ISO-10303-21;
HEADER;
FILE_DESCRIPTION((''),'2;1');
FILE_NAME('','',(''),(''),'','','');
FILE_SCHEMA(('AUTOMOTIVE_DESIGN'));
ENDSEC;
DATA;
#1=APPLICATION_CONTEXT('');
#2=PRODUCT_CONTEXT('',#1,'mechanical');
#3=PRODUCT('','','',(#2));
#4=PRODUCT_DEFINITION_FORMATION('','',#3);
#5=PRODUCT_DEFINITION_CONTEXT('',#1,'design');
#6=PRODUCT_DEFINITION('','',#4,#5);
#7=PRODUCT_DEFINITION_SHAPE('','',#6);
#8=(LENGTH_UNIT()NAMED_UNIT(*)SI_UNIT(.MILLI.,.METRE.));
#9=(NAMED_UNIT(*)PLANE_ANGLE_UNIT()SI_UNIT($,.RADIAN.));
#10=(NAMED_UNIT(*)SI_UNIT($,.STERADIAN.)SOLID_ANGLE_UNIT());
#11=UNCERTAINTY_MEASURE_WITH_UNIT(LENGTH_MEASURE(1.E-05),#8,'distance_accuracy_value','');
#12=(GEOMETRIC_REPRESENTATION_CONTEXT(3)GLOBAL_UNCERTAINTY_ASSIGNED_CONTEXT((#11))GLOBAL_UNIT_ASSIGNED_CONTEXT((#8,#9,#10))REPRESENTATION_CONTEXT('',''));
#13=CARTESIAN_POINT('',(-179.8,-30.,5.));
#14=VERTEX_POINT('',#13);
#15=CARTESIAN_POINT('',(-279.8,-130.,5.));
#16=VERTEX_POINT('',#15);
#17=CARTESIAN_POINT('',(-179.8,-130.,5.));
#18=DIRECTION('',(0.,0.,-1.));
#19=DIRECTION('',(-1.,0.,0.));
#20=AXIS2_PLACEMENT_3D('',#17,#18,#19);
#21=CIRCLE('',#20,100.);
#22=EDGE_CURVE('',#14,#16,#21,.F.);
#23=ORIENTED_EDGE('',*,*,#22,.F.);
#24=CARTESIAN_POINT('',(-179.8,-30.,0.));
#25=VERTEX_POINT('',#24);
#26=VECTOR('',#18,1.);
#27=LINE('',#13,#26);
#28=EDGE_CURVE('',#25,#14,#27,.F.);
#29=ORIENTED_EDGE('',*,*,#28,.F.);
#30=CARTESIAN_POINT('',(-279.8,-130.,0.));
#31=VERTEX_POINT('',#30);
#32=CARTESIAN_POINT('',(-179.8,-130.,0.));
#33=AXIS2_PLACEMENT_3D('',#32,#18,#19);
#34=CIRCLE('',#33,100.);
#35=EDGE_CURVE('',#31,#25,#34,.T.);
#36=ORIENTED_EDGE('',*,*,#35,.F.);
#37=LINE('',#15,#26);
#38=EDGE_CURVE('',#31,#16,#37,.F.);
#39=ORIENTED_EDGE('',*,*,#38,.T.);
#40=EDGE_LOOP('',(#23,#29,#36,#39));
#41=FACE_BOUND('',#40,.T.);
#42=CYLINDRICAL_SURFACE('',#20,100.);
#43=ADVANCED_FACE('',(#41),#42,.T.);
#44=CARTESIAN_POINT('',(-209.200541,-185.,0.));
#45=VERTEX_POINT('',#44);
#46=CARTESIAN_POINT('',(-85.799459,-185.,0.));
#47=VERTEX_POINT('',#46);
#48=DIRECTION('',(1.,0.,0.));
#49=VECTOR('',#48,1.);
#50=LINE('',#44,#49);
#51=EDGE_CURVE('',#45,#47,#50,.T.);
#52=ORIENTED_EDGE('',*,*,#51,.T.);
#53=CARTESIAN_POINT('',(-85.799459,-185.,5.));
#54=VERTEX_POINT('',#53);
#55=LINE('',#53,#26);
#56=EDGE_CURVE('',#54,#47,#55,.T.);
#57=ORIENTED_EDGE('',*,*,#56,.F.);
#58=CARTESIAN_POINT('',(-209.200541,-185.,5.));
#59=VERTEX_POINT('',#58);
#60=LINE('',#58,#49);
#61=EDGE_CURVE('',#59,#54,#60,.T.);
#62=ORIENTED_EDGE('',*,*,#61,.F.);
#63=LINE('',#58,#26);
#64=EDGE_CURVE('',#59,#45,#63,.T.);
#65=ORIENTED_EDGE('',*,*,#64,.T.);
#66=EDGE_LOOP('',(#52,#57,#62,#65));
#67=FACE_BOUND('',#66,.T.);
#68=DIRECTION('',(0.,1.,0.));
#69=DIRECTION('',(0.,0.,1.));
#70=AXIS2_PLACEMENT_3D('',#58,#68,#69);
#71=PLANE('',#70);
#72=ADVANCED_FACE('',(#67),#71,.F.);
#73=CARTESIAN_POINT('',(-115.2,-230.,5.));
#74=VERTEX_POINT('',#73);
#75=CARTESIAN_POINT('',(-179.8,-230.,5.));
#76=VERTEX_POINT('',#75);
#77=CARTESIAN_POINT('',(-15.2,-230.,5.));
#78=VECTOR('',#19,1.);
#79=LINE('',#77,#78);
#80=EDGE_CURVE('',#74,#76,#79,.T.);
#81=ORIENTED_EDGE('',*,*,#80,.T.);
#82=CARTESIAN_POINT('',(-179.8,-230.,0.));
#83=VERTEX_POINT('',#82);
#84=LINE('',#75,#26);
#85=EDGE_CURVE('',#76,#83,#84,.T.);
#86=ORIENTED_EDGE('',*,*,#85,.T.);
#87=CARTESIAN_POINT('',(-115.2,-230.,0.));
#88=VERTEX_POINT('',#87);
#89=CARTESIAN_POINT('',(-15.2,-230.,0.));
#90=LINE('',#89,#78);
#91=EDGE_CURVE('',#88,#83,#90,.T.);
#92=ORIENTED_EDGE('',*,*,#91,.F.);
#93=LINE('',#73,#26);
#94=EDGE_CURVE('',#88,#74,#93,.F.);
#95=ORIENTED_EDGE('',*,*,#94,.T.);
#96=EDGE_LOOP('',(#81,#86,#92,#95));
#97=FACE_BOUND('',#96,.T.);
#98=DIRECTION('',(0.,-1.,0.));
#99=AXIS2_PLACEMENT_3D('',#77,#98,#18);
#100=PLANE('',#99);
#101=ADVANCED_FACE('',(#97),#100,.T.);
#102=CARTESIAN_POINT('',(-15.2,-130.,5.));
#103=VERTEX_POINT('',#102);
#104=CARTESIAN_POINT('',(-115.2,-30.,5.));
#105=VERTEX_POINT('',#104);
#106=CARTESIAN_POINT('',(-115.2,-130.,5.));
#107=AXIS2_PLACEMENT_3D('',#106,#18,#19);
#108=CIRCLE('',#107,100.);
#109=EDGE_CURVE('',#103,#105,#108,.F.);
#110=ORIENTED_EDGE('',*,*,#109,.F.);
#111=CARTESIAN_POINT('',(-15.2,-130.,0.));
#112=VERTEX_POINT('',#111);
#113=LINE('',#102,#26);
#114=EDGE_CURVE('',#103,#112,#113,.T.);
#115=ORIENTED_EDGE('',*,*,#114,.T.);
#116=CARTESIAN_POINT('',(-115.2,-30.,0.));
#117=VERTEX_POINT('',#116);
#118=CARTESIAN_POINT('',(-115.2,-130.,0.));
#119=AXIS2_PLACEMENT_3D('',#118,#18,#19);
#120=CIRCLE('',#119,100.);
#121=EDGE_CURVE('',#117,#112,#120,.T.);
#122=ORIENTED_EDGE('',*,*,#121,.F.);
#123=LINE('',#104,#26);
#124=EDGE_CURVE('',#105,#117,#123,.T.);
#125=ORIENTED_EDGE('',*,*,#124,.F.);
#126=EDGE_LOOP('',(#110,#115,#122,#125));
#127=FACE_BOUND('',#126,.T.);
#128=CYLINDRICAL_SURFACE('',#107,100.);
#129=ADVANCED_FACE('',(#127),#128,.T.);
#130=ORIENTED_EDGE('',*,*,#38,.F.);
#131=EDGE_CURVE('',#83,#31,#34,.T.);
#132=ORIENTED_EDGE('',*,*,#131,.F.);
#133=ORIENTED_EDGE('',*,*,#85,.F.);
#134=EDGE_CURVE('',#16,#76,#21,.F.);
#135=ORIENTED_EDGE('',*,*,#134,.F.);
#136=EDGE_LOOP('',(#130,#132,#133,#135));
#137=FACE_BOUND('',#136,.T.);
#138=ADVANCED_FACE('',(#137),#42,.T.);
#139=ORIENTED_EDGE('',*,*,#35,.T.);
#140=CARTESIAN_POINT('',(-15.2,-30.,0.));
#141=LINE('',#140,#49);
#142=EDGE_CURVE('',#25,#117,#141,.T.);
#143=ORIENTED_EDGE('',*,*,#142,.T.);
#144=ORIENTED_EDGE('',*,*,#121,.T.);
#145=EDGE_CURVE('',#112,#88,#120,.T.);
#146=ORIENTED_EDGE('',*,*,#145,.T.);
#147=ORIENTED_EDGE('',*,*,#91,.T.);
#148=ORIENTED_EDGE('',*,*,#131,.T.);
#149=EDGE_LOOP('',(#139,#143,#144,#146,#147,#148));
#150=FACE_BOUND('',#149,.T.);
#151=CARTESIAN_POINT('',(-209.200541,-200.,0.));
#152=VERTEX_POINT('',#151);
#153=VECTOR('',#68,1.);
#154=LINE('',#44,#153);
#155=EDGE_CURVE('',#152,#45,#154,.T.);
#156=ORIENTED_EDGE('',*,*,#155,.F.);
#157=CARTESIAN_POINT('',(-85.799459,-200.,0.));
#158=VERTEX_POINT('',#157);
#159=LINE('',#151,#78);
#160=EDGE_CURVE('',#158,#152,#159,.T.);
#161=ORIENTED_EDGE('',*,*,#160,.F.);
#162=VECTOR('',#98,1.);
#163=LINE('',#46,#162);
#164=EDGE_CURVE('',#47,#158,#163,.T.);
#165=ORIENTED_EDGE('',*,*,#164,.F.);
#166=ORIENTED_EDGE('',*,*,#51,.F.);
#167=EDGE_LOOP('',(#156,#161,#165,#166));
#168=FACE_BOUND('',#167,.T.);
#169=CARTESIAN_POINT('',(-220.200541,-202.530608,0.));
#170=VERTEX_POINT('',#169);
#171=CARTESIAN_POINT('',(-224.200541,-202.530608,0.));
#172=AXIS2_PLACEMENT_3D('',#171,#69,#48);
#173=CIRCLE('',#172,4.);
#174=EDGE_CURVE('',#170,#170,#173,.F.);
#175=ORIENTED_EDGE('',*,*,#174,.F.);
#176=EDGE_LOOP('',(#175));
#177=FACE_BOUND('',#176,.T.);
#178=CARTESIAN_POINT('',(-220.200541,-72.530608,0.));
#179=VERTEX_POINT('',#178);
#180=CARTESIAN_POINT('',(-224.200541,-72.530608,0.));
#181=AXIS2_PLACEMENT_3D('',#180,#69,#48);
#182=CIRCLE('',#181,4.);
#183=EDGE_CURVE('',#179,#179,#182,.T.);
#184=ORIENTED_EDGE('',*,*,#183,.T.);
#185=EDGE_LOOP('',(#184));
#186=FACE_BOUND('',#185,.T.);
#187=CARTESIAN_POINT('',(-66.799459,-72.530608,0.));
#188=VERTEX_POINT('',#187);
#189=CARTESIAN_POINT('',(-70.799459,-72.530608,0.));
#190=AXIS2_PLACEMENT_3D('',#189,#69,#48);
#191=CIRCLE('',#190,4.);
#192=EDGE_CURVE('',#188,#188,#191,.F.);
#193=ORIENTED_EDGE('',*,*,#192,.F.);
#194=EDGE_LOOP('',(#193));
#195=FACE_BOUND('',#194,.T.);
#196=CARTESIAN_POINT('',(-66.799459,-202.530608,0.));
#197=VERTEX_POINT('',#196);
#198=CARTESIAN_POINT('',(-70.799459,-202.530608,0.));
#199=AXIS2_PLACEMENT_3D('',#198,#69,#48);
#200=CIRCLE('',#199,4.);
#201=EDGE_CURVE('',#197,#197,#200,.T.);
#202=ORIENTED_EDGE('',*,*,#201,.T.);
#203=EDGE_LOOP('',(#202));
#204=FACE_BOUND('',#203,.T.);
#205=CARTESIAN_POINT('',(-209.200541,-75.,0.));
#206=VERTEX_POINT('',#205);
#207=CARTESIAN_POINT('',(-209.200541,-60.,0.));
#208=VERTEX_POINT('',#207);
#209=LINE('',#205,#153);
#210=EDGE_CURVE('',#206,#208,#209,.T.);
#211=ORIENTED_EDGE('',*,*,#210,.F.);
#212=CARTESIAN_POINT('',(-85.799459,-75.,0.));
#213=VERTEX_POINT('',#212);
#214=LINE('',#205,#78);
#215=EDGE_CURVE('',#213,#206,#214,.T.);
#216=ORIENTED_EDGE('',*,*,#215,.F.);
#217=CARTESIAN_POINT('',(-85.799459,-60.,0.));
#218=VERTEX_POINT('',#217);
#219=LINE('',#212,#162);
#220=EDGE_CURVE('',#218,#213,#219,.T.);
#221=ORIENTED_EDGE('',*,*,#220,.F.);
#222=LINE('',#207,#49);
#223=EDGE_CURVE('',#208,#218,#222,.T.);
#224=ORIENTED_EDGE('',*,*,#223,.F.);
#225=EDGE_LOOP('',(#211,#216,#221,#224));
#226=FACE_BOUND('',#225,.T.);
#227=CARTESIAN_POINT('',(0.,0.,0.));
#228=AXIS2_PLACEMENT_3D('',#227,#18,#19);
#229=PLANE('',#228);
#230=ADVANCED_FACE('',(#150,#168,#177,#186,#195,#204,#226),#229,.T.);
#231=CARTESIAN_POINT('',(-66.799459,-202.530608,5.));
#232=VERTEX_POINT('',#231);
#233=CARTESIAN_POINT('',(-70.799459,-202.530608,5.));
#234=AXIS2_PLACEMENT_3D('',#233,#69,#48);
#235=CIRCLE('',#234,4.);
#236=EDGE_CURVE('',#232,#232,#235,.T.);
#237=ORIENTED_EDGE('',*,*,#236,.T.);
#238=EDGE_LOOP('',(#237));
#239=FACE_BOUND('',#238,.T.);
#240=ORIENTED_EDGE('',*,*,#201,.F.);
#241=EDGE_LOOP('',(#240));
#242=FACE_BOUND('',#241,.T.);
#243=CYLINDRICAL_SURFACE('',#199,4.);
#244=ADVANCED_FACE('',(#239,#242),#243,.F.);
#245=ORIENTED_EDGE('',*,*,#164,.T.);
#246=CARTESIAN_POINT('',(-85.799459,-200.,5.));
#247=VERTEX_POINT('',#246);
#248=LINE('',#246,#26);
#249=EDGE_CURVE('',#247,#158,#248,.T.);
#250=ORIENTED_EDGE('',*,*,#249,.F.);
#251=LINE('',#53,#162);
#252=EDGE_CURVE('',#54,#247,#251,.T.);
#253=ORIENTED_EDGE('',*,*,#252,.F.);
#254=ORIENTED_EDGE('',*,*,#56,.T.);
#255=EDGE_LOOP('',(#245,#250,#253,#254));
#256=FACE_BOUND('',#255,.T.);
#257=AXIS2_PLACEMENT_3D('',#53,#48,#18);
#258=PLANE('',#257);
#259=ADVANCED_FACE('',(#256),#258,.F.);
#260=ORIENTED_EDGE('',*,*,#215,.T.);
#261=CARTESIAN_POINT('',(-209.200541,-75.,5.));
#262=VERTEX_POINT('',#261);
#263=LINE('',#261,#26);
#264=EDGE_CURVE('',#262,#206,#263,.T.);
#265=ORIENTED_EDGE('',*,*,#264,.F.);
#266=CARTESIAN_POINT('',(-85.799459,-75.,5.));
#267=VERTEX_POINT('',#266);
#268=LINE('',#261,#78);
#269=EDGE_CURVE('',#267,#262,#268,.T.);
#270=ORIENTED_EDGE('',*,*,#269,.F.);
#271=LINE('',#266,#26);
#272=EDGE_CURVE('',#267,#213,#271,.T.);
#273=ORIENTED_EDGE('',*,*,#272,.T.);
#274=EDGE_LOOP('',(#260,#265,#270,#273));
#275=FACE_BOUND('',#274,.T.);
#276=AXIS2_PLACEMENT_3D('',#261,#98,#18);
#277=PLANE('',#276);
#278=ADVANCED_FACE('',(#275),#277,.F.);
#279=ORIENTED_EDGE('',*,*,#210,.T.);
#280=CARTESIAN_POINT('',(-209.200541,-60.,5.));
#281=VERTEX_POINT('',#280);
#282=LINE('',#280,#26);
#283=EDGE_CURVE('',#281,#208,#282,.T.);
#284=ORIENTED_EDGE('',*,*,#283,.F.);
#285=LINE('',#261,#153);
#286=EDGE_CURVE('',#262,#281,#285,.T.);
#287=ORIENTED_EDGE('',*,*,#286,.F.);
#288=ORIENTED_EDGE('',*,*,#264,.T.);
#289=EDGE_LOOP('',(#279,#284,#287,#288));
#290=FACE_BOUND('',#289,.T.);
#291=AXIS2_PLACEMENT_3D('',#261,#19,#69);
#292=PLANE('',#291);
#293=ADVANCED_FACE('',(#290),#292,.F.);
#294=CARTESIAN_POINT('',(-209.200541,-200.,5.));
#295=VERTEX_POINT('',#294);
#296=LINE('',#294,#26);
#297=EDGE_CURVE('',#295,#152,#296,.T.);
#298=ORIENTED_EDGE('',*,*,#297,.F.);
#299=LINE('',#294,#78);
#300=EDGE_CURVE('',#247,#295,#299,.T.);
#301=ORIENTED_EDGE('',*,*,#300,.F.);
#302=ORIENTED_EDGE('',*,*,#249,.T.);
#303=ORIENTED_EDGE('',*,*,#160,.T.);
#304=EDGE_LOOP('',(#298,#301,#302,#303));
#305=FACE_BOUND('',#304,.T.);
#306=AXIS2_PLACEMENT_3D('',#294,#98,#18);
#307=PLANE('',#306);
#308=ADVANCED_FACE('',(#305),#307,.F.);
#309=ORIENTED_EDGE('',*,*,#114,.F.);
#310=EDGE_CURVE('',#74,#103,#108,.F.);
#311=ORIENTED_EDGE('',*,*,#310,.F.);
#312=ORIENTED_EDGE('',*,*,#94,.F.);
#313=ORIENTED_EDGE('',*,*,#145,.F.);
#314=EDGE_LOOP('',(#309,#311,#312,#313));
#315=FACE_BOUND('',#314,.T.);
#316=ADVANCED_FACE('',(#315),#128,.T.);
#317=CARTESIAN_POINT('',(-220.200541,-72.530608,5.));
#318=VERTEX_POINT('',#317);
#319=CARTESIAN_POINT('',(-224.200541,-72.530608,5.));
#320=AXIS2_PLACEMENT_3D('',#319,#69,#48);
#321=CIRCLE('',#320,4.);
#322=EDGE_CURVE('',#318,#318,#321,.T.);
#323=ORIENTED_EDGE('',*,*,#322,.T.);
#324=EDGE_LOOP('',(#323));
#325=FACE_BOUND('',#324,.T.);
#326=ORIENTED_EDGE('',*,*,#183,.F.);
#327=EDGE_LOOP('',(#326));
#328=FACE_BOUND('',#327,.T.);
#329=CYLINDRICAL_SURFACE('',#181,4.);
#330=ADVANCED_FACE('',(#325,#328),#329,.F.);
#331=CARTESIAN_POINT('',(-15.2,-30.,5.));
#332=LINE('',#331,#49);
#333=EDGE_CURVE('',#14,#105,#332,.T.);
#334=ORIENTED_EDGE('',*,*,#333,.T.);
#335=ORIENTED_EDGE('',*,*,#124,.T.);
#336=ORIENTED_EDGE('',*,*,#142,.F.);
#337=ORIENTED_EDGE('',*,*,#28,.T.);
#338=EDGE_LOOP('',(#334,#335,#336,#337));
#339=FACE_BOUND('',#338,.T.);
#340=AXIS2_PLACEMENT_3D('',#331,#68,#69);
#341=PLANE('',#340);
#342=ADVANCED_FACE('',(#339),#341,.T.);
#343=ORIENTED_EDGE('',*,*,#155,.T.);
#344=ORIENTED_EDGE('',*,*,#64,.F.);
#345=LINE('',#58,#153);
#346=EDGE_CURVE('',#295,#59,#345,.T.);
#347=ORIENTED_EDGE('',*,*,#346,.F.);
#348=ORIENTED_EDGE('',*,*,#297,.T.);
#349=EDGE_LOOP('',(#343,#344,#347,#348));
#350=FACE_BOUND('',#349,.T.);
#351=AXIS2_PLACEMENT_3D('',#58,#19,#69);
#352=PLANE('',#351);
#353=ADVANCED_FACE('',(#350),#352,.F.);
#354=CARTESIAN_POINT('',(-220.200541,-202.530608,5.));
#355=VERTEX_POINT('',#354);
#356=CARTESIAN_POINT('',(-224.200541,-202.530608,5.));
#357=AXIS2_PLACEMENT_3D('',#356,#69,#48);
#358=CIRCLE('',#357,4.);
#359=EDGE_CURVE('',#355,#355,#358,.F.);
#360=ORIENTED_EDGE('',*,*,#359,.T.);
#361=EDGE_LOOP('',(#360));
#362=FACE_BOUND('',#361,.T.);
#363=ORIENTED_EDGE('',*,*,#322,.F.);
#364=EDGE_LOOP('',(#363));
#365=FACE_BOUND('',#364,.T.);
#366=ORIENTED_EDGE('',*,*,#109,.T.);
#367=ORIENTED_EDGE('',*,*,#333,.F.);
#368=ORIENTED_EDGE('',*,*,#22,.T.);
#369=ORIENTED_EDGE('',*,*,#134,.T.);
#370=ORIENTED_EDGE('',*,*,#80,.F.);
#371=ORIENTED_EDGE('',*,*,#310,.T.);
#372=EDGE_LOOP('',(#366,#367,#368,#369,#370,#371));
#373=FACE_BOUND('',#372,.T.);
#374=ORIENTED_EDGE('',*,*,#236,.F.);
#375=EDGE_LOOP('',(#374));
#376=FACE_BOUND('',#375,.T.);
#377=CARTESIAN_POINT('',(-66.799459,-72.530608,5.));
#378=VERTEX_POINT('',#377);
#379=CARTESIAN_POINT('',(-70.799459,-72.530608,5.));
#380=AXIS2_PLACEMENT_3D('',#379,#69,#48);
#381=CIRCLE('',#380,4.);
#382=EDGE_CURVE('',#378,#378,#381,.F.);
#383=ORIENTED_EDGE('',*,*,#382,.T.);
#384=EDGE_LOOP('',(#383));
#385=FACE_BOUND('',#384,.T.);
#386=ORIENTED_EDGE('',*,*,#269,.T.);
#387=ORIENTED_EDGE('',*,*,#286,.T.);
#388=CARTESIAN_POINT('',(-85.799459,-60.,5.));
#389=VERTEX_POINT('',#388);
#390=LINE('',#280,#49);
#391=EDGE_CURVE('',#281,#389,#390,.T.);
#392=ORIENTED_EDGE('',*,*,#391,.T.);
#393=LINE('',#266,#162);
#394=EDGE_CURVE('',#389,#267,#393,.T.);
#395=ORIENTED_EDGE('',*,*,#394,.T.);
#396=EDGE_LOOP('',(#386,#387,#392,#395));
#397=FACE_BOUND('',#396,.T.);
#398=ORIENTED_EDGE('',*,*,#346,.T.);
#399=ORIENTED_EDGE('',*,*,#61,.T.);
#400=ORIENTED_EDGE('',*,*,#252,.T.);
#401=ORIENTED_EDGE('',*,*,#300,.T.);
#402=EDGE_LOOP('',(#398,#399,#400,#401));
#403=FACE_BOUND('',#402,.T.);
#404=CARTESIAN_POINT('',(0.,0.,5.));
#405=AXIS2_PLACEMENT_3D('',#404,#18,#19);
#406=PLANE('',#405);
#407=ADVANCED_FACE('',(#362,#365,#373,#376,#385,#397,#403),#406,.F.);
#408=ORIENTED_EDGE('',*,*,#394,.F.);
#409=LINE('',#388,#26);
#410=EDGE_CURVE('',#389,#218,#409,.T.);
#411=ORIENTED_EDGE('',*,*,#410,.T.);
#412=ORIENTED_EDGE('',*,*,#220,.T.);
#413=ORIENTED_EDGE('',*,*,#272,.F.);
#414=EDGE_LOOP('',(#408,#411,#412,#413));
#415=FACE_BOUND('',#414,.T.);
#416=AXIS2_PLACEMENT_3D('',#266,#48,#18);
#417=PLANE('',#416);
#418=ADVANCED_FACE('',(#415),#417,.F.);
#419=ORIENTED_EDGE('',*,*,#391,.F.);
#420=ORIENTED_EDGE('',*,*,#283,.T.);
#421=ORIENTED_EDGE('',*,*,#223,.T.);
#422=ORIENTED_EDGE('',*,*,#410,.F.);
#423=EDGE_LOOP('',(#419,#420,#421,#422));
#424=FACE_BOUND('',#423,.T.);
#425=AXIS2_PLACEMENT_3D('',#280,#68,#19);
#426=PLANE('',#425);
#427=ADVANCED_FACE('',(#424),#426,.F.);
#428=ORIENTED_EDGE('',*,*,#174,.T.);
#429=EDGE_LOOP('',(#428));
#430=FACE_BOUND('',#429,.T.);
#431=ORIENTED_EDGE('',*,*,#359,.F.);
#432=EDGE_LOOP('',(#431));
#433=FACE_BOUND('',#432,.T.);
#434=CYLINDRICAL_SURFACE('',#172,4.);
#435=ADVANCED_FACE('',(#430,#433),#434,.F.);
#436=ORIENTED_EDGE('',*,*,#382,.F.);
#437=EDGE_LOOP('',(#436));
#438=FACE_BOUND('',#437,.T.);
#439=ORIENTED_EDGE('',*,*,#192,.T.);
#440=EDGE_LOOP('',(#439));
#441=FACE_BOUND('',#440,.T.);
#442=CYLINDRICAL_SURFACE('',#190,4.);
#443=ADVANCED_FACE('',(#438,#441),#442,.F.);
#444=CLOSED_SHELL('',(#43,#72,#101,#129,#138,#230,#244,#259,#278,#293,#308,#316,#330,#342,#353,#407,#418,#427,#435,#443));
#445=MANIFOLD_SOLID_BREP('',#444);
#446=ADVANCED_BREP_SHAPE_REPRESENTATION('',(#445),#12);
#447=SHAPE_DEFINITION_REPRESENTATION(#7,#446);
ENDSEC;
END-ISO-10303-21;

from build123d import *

# Parameters (mm, degrees)
ESQUISSE1_W             = 295
ESQUISSE1_H             = 260
BOSS_EXTRU_1_DEPTH      = 5
ESQUISSE3_OUTSIDE_W     = 375.652
ESQUISSE3_OUTSIDE_H     = 340.652
ESQUISSE3_OUTSIDE_W_2   = 264.6
ESQUISSE3_OUTSIDE_H_2   = 200
ENL_V_MAT_EXTRU_2_DEPTH = 394.255642045
CONG_1_R                = 100
ENL_V_MAT_EXTRU_4_DEPTH = 363.233405417
ESQUISSE7_W             = 123.401082374
ESQUISSE7_H             = 15
ENL_V_MAT_EXTRU_6_DEPTH = 363.233405417


with BuildPart() as part:
    # Esquisse1 → Boss.-Extru.1 (new body)
    with BuildSketch(Plane.XY):
        with Locations((-147.5, -130)):
            Rectangle(ESQUISSE1_W, ESQUISSE1_H)
    extrude(amount=BOSS_EXTRU_1_DEPTH)

    # Esquisse3 outside → Enlèv. mat.-Extru.2 (cut, through all)
    with BuildSketch(Plane(origin=(0, 0, 0), x_dir=(-1, 0, 0), z_dir=(0, 0, -1))):
        with Locations((147.5, -130)):
            Rectangle(ESQUISSE3_OUTSIDE_W, ESQUISSE3_OUTSIDE_H)
        with Locations((147.5, -130)):
            Rectangle(ESQUISSE3_OUTSIDE_W_2, ESQUISSE3_OUTSIDE_H_2, mode=Mode.SUBTRACT)
    extrude(amount=-ENL_V_MAT_EXTRU_2_DEPTH, mode=Mode.SUBTRACT)

    # Congé1
    cong_1_edges = [part.edges().sort_by_distance(p)[0] for p in [
        (-279.8, -30, 2.5),
        (-15.2, -30, 2.5),
        (-279.8, -230, 2.5),
        (-15.2, -230, 2.5),
    ]]
    fillet(cong_1_edges, radius=CONG_1_R - 0.0001)  # a hair under: the kernel refuses the full size

    # Esquisse5 → Enlèv. mat.-Extru.4 (cut, through all)
    with BuildSketch(Plane.XY.offset(5)):
        with BuildLine():
            ThreePointArc((-70.799458813, -198.530608435), (-73.627885938, -199.70218131), (-74.799458813, -202.530608435))
            Line((-74.799458813, -202.530608435), (-70.799458813, -202.530608435))
            Line((-70.799458813, -202.530608435), (-70.799458813, -198.530608435))
        make_face()
        with BuildLine():
            Line((-70.799458813, -202.530608435), (-74.799458813, -202.530608435))
            ThreePointArc((-74.799458813, -202.530608435), (-70.799458813, -206.530608435), (-66.799458813, -202.530608435))
            ThreePointArc((-66.799458813, -202.530608435), (-67.971031689, -199.70218131), (-70.799458813, -198.530608435))
            Line((-70.799458813, -198.530608435), (-70.799458813, -202.530608435))
        make_face()
        with BuildLine():
            ThreePointArc((-224.200541187, -198.530608435), (-227.028968311, -205.35903556), (-220.200541187, -202.530608435))
            Line((-220.200541187, -202.530608435), (-224.200541187, -202.530608435))
            Line((-224.200541187, -202.530608435), (-224.200541187, -198.530608435))
        make_face()
        with BuildLine():
            Line((-224.200541187, -202.530608435), (-220.200541187, -202.530608435))
            ThreePointArc((-220.200541187, -202.530608435), (-221.372114062, -199.70218131), (-224.200541187, -198.530608435))
            Line((-224.200541187, -198.530608435), (-224.200541187, -202.530608435))
        make_face()
        with BuildLine():
            ThreePointArc((-220.200541187, -72.530608435), (-227.028968311, -69.70218131), (-224.200541187, -76.530608435))
            Line((-224.200541187, -76.530608435), (-224.200541187, -72.530608435))
            Line((-224.200541187, -72.530608435), (-220.200541187, -72.530608435))
        make_face()
        with BuildLine():
            Line((-224.200541187, -72.530608435), (-224.200541187, -76.530608435))
            ThreePointArc((-224.200541187, -76.530608435), (-221.372114062, -75.35903556), (-220.200541187, -72.530608435))
            Line((-220.200541187, -72.530608435), (-224.200541187, -72.530608435))
        make_face()
        with BuildLine():
            ThreePointArc((-74.799458813, -72.530608435), (-73.627885938, -75.35903556), (-70.799458813, -76.530608435))
            Line((-70.799458813, -76.530608435), (-70.799458813, -72.530608435))
            Line((-70.799458813, -72.530608435), (-74.799458813, -72.530608435))
        make_face()
        with BuildLine():
            Line((-70.799458813, -72.530608435), (-70.799458813, -76.530608435))
            ThreePointArc((-70.799458813, -76.530608435), (-67.971031689, -75.35903556), (-66.799458813, -72.530608435))
            ThreePointArc((-66.799458813, -72.530608435), (-70.799458813, -68.530608435), (-74.799458813, -72.530608435))
            Line((-74.799458813, -72.530608435), (-70.799458813, -72.530608435))
        make_face()
    extrude(amount=-ENL_V_MAT_EXTRU_4_DEPTH, mode=Mode.SUBTRACT)

    # Esquisse7 → Enlèv. mat.-Extru.6 (cut, through all)
    with BuildSketch(Plane(origin=(0, 0, 0), x_dir=(-1, 0, 0), z_dir=(0, 0, -1))):
        with Locations((147.5, -67.5)):
            Rectangle(ESQUISSE7_W, ESQUISSE7_H)
        with Locations((147.5, -192.5)):
            Rectangle(ESQUISSE7_W, ESQUISSE7_H)
    extrude(amount=-ENL_V_MAT_EXTRU_6_DEPTH, mode=Mode.SUBTRACT)


solid = part.part
